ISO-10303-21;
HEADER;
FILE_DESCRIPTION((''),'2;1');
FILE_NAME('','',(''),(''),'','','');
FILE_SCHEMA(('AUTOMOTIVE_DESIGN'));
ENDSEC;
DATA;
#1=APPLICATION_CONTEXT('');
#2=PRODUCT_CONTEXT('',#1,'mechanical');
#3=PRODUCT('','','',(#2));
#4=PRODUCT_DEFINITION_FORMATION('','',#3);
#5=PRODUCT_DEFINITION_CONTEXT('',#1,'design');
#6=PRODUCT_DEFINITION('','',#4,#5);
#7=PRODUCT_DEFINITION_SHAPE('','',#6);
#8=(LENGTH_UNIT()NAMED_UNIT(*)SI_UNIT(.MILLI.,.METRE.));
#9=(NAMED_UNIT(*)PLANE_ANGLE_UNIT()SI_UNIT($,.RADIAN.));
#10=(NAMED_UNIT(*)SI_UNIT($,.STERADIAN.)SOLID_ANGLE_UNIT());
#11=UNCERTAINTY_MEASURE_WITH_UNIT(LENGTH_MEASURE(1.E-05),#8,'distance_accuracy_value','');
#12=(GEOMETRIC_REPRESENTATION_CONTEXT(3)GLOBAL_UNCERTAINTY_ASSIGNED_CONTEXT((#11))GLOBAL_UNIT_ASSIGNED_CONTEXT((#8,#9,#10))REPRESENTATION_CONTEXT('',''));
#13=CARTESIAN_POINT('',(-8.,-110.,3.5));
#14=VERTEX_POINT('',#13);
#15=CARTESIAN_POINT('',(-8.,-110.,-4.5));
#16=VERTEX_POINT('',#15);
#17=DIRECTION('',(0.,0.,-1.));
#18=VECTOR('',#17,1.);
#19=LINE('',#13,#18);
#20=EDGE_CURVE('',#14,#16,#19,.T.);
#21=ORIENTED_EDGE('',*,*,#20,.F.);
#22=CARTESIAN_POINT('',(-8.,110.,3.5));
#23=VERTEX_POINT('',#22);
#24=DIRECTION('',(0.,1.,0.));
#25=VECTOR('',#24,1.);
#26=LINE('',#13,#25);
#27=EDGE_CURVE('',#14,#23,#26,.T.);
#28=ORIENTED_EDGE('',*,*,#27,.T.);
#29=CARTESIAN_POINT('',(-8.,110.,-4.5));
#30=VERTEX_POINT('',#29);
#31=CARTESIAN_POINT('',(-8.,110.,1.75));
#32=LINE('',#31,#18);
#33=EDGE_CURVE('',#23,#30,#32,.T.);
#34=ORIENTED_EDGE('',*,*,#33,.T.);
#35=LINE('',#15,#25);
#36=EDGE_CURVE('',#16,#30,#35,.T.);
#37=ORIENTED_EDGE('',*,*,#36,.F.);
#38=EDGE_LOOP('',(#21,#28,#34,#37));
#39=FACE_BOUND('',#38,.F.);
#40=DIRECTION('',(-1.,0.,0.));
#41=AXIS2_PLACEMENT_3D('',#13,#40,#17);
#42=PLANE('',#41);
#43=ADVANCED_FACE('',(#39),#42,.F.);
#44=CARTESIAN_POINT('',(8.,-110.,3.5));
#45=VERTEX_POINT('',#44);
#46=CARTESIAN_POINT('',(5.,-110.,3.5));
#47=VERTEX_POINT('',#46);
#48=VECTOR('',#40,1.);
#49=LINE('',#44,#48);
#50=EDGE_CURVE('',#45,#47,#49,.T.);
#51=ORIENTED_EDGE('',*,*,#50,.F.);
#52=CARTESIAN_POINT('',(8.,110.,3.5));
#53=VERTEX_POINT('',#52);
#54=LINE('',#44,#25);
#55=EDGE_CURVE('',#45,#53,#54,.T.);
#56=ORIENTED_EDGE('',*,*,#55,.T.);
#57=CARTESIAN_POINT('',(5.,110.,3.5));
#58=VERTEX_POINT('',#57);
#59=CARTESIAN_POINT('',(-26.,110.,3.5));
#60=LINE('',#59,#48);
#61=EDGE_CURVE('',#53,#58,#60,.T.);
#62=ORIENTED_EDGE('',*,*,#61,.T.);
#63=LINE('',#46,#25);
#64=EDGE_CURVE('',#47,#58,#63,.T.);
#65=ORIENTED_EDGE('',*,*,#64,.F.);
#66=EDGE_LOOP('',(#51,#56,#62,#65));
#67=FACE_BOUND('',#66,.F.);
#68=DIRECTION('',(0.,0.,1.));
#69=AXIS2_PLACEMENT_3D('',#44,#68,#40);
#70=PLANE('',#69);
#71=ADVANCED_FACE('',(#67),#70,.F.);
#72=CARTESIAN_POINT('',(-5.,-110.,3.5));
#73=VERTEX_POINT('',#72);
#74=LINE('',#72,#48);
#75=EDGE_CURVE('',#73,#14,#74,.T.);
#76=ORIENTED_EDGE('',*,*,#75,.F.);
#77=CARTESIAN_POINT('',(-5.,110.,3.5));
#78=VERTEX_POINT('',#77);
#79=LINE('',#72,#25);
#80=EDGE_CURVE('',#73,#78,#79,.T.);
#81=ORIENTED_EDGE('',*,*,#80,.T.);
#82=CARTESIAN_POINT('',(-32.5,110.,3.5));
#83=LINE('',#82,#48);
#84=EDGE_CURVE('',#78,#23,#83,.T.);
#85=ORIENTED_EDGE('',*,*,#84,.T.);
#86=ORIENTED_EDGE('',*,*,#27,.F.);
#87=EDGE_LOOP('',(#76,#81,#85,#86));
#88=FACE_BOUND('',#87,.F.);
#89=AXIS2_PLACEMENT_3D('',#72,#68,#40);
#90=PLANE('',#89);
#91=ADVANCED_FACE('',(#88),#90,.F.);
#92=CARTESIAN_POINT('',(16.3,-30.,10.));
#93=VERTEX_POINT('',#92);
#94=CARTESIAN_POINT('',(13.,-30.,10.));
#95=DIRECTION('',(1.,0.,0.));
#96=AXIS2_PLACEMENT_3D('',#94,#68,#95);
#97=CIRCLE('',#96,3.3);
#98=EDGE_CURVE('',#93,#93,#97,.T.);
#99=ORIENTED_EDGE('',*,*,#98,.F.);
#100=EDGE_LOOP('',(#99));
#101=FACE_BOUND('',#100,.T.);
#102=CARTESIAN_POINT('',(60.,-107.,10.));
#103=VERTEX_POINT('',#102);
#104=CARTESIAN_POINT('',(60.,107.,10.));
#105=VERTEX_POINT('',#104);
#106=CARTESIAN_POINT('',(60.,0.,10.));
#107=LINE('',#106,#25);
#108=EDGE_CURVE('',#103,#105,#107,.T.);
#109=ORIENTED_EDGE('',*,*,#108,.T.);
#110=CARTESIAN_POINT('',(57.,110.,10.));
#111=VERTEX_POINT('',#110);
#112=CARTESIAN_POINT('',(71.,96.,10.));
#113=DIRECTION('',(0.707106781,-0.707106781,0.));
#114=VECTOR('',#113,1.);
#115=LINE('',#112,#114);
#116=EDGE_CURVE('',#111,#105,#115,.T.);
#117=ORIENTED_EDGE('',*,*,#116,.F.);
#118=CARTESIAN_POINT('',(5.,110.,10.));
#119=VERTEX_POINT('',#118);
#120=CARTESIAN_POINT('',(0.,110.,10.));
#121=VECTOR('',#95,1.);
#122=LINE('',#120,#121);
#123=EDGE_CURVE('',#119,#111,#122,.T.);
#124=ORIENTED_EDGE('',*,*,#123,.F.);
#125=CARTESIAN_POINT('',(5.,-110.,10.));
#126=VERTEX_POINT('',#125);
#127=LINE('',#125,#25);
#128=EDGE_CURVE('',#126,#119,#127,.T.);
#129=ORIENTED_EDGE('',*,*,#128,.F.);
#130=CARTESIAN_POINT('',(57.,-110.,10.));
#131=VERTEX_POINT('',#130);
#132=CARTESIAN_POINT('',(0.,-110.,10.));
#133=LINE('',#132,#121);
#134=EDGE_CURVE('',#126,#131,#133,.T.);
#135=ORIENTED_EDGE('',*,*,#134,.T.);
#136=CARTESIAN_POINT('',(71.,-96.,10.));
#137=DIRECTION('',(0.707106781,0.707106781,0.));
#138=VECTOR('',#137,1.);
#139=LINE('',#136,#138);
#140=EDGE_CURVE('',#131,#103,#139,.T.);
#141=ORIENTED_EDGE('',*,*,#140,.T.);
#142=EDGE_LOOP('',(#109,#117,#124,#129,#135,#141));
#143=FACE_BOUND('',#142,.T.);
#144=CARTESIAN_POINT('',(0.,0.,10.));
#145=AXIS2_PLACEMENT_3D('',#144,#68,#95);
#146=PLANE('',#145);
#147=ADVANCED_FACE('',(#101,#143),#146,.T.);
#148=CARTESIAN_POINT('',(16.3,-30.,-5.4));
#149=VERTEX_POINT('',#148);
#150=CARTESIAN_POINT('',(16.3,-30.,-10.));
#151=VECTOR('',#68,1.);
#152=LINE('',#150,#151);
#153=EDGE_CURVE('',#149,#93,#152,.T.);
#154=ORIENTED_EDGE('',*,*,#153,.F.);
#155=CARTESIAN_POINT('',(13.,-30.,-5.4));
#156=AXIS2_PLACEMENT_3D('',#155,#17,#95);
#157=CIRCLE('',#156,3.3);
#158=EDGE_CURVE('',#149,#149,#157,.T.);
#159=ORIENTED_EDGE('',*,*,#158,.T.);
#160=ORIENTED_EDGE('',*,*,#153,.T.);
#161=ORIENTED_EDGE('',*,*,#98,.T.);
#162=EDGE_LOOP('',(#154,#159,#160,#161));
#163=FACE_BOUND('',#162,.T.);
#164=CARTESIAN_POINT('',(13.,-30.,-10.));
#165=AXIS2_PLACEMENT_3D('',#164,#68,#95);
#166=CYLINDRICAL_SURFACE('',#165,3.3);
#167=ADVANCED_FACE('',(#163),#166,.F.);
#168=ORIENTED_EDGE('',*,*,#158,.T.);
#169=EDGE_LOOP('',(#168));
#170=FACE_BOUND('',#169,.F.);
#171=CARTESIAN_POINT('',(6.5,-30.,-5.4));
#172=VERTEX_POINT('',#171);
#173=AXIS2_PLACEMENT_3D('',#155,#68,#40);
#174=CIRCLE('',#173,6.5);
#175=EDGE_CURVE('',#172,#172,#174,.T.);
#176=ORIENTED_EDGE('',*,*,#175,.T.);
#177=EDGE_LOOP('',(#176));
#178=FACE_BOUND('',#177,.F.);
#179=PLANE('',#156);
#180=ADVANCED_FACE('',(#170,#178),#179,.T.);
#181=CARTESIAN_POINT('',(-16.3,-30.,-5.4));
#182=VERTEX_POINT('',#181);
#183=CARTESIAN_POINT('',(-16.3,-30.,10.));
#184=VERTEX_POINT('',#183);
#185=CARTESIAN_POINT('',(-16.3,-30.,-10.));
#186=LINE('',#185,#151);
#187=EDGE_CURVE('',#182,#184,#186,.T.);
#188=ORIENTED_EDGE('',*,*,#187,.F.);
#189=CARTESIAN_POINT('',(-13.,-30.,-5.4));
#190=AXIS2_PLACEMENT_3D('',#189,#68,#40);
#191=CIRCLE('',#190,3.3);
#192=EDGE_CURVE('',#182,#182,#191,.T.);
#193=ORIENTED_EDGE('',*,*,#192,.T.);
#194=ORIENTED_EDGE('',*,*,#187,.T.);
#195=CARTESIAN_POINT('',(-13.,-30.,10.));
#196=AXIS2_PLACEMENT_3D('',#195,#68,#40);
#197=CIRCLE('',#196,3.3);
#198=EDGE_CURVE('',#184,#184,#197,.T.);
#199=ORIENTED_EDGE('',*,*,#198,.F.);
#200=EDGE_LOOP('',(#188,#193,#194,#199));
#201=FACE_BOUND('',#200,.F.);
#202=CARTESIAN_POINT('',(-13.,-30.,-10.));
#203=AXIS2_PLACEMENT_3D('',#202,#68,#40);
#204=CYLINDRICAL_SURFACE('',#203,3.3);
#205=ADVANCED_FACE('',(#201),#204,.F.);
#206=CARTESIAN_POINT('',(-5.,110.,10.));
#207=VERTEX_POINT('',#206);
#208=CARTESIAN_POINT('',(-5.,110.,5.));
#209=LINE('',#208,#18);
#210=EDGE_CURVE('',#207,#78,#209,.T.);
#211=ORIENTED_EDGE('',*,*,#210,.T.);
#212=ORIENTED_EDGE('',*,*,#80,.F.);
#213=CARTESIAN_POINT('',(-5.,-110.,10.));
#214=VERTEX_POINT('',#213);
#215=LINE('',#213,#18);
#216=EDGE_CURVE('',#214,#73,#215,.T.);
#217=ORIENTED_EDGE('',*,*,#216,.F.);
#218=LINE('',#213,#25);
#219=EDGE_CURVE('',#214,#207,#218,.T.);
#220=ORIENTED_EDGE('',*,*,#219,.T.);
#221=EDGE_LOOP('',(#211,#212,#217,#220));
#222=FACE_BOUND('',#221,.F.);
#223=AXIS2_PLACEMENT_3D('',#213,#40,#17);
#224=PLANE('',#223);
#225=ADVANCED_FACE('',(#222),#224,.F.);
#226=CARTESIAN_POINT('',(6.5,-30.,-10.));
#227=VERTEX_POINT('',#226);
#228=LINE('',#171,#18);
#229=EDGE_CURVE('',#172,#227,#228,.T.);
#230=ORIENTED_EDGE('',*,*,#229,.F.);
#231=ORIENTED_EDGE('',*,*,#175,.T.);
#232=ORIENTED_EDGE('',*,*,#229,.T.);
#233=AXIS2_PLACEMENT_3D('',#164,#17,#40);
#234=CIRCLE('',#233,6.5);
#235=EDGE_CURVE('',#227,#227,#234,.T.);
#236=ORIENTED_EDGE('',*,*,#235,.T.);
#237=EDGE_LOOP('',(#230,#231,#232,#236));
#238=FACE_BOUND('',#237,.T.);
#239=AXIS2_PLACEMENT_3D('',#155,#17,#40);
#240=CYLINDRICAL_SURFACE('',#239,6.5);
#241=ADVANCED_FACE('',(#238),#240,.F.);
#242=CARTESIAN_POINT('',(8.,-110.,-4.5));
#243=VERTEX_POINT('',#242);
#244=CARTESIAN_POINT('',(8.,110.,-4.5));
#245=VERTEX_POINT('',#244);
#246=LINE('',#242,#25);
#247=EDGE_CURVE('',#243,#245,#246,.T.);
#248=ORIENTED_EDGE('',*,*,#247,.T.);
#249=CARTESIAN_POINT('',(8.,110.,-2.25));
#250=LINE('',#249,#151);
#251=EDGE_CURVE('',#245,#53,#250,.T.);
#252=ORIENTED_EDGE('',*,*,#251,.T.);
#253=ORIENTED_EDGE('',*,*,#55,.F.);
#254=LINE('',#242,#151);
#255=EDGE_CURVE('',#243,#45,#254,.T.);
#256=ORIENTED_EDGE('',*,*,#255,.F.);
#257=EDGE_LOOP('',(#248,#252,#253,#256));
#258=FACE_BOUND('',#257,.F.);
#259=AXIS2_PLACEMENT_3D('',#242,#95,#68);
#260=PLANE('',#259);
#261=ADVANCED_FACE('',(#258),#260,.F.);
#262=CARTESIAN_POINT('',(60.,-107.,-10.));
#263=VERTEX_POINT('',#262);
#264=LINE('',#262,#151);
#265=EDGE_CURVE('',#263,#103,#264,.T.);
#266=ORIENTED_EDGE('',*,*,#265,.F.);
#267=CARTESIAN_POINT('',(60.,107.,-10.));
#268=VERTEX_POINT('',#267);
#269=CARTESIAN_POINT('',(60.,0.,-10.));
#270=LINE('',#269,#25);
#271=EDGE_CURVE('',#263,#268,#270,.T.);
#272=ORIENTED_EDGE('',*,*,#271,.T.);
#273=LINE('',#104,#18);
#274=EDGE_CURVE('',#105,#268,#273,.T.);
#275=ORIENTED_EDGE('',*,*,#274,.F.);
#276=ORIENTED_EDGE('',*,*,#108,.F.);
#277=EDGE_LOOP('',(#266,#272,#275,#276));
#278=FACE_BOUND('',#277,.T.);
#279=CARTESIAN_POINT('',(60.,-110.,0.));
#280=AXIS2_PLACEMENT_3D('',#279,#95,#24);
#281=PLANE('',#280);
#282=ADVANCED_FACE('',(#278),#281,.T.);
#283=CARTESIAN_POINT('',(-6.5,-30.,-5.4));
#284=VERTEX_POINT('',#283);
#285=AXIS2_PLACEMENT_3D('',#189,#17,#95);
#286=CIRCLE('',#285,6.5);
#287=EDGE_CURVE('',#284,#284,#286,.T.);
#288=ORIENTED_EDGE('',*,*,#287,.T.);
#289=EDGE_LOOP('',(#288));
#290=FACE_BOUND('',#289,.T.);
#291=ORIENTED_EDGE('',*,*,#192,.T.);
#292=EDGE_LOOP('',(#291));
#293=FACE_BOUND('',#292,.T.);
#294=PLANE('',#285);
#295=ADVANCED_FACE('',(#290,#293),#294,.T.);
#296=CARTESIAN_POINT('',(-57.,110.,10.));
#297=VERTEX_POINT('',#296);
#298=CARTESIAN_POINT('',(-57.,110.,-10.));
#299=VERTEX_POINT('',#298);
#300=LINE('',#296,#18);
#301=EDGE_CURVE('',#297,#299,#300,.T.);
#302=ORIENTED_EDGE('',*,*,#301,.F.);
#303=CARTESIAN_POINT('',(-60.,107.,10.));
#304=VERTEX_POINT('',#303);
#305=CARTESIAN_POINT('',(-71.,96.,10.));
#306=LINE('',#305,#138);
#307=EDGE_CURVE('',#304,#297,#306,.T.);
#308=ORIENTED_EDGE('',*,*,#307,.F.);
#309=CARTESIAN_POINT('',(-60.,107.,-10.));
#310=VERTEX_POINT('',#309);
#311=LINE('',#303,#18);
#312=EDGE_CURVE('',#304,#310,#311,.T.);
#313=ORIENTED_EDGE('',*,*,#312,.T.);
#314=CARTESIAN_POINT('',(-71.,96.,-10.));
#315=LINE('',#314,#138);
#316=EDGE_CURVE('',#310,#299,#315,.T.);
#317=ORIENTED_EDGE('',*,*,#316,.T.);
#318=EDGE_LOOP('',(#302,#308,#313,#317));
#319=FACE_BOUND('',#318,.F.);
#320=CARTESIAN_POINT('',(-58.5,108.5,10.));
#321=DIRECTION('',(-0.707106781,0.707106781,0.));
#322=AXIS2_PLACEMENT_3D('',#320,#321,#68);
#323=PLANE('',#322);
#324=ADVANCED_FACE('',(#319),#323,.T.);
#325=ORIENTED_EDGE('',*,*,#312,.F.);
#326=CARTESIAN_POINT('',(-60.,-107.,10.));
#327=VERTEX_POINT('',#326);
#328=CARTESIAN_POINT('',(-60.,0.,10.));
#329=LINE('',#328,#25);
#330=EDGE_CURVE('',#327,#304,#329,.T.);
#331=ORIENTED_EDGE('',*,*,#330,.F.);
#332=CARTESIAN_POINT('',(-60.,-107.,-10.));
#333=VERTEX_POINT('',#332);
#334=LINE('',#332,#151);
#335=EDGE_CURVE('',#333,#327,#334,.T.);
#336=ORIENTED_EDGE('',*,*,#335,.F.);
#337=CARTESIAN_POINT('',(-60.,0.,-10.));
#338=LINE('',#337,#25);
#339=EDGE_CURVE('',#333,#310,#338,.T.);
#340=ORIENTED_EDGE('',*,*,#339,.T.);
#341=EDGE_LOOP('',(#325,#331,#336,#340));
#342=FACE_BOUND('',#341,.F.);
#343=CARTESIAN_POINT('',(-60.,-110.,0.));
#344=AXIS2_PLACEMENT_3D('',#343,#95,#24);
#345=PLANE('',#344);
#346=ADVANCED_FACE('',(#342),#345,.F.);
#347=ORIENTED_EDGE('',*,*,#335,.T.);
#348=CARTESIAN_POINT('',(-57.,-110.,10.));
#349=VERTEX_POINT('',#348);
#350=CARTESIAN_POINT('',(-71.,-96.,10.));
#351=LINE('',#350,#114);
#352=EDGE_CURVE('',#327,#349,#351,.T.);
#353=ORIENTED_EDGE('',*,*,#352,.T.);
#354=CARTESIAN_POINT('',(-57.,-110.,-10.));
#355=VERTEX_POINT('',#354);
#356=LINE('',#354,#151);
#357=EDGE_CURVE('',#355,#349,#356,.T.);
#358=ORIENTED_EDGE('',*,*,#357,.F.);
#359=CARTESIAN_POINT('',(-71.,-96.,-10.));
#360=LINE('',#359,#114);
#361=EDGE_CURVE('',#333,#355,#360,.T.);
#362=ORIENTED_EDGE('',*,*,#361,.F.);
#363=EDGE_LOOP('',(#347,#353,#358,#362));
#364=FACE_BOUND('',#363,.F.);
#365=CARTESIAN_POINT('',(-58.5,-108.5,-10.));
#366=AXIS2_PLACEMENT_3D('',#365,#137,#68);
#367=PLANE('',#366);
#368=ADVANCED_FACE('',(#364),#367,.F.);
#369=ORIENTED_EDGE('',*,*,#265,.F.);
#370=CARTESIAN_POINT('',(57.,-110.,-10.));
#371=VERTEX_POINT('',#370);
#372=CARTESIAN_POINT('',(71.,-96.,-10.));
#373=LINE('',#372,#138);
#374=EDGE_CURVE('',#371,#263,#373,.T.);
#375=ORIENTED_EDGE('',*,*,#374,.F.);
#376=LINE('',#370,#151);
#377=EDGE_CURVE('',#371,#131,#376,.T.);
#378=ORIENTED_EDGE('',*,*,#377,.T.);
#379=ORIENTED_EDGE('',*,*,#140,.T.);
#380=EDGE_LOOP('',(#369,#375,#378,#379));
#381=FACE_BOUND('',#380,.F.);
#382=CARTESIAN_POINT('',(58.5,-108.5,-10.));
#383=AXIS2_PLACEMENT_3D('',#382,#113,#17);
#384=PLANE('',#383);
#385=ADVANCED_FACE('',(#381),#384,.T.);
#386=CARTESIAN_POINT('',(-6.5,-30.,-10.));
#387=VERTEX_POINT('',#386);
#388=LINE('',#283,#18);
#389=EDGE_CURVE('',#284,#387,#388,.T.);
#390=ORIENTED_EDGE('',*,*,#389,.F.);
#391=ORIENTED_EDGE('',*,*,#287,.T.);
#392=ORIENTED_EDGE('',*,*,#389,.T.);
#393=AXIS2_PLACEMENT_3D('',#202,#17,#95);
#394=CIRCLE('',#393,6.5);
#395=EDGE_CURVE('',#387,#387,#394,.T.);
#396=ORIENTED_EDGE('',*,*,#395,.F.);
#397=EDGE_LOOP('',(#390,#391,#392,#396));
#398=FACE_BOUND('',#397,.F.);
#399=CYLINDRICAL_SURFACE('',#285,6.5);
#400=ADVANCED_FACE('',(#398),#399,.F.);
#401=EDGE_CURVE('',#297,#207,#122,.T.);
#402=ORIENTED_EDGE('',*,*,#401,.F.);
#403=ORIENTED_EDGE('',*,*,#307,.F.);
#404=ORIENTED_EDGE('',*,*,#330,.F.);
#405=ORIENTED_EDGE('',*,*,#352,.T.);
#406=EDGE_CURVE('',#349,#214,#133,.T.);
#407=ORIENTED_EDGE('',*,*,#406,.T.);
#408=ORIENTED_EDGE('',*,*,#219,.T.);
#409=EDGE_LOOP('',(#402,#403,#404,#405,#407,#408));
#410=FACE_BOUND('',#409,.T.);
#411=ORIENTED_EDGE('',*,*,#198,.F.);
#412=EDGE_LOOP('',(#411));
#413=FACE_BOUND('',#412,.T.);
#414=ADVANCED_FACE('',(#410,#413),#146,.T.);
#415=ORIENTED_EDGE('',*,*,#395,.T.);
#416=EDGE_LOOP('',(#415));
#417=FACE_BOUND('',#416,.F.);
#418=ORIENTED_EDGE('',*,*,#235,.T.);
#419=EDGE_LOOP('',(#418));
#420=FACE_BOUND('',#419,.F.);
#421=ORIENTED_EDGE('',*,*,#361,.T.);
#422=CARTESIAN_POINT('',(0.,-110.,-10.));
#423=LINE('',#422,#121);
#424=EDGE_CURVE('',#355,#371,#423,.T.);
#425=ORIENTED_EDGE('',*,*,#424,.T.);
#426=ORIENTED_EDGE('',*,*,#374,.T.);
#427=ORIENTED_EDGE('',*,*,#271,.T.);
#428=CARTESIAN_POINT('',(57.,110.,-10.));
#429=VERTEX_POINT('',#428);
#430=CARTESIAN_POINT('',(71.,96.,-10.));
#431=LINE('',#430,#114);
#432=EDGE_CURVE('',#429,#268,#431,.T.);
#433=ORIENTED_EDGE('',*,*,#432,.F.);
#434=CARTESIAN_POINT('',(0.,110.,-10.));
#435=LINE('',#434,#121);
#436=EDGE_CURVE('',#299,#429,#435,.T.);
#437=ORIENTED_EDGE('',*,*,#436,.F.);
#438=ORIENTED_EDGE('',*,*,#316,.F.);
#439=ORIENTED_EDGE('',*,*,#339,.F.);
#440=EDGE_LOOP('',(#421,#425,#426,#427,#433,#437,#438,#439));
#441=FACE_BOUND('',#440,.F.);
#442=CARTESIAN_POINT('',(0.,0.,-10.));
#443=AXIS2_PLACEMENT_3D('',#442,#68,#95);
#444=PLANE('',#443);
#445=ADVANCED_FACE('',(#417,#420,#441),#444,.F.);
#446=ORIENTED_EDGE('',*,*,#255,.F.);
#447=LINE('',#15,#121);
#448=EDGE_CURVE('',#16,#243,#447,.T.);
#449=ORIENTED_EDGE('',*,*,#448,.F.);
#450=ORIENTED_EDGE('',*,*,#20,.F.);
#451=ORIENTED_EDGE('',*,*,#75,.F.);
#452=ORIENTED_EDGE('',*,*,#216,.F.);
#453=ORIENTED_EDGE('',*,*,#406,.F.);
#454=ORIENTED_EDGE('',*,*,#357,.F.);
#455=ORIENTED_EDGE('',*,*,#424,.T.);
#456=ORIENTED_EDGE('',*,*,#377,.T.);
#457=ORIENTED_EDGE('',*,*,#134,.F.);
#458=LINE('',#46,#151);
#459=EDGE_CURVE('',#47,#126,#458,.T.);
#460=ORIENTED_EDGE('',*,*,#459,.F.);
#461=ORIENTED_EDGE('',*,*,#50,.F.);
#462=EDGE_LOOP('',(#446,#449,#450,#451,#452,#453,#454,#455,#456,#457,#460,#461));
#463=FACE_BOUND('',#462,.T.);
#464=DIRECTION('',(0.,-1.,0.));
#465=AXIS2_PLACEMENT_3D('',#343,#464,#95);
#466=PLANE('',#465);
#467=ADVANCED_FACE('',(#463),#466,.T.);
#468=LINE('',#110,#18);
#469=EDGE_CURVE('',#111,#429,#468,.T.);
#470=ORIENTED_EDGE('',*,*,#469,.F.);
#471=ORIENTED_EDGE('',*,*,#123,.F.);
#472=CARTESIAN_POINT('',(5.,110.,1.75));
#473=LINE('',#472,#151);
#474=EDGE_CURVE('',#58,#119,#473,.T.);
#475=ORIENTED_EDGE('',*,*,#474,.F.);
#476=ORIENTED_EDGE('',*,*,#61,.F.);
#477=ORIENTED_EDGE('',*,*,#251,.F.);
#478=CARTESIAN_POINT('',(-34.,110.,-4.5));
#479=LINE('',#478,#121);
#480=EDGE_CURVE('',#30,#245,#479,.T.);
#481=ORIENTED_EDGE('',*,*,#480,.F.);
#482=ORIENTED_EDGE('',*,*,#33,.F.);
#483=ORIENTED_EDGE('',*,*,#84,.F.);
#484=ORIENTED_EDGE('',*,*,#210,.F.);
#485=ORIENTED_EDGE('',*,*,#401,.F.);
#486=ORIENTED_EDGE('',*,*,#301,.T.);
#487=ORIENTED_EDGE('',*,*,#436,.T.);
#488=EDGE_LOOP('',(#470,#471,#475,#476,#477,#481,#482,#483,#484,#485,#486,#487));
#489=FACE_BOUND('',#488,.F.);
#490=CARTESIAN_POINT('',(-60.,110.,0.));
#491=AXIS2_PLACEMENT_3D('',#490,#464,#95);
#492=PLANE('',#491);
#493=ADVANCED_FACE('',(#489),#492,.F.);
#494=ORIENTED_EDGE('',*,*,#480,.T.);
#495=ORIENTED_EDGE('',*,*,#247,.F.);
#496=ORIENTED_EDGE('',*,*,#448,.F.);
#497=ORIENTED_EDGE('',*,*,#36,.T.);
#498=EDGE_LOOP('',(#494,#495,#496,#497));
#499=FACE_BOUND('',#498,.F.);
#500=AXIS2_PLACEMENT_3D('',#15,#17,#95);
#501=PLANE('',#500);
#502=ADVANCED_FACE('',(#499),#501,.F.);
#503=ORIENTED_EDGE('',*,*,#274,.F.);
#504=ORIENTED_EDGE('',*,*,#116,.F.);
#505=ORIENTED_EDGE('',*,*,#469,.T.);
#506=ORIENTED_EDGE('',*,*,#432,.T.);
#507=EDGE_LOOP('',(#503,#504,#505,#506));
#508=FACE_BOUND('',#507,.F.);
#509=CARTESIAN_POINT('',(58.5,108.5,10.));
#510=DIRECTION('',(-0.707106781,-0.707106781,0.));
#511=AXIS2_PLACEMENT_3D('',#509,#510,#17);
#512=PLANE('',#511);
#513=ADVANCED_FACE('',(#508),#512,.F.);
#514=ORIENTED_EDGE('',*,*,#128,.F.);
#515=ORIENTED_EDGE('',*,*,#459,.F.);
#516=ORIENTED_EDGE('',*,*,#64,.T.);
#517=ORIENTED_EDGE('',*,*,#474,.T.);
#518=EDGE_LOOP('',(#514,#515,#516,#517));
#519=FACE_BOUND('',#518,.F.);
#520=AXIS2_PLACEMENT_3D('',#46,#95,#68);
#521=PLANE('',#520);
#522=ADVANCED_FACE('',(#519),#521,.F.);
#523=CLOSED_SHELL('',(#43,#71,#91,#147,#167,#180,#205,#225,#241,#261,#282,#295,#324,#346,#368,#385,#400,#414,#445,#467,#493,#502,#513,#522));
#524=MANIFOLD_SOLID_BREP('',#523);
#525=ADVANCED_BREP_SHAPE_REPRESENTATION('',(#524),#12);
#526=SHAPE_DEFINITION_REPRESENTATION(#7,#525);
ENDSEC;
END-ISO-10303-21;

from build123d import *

# Parameters (mm, degrees)
F0_W           = 120
F0_H           = 220
F1_DEPTH       = 10
F3_DEPTH       = 220.001
F4_SIZE        = 3
F6_D           = 6.6
F6_CBORE_D     = 13
F6_CBORE_DEPTH = 4.6


# Not quite as in the source:
# - a pattern or mirror of a feature is missing from the dataset's text; its kind, count and spacing are read off the source's solid


with BuildPart() as f1:
    # F0 (on Top) → F1 (new body, symmetric)
    with BuildSketch(Plane.XY):
        Rectangle(F0_W, F0_H)
    extrude(amount=F1_DEPTH, both=True)

    # F2 (on face) → F3 (cut, through all)
    with BuildSketch(Plane.XZ.offset(110)):
        Polygon((5, 10), (-5, 10), (-5, 3.5), (-8, 3.5), (-8, -4.5), (8, -4.5), (8, 3.5), (5, 3.5), align=None)
    extrude(amount=-F3_DEPTH, mode=Mode.SUBTRACT)

    # F4
    f4_edges = [f1.edges().sort_by_distance(p)[0] for p in [
        (60, -110, 0),
        (60, 110, 0),
        (-60, 110, 0),
        (-60, -110, 0),
    ]]
    chamfer(f4_edges, length=F4_SIZE)

    # F6 (through all)
    with Locations(Plane(origin=(0, 0, -10), x_dir=(1, 0, 0), z_dir=(0, 0, -1))):
        with Locations((-13, 30)):
            f6 = CounterBoreHole(F6_D / 2, F6_CBORE_D / 2, F6_CBORE_DEPTH)

    # F6_copies: F6 across plane
    add(f6.mirror(Plane(origin=(0, 0, 0), x_dir=(0, 0, 1), z_dir=(1, 0, 0))), mode=Mode.SUBTRACT)


solid = f1.part
